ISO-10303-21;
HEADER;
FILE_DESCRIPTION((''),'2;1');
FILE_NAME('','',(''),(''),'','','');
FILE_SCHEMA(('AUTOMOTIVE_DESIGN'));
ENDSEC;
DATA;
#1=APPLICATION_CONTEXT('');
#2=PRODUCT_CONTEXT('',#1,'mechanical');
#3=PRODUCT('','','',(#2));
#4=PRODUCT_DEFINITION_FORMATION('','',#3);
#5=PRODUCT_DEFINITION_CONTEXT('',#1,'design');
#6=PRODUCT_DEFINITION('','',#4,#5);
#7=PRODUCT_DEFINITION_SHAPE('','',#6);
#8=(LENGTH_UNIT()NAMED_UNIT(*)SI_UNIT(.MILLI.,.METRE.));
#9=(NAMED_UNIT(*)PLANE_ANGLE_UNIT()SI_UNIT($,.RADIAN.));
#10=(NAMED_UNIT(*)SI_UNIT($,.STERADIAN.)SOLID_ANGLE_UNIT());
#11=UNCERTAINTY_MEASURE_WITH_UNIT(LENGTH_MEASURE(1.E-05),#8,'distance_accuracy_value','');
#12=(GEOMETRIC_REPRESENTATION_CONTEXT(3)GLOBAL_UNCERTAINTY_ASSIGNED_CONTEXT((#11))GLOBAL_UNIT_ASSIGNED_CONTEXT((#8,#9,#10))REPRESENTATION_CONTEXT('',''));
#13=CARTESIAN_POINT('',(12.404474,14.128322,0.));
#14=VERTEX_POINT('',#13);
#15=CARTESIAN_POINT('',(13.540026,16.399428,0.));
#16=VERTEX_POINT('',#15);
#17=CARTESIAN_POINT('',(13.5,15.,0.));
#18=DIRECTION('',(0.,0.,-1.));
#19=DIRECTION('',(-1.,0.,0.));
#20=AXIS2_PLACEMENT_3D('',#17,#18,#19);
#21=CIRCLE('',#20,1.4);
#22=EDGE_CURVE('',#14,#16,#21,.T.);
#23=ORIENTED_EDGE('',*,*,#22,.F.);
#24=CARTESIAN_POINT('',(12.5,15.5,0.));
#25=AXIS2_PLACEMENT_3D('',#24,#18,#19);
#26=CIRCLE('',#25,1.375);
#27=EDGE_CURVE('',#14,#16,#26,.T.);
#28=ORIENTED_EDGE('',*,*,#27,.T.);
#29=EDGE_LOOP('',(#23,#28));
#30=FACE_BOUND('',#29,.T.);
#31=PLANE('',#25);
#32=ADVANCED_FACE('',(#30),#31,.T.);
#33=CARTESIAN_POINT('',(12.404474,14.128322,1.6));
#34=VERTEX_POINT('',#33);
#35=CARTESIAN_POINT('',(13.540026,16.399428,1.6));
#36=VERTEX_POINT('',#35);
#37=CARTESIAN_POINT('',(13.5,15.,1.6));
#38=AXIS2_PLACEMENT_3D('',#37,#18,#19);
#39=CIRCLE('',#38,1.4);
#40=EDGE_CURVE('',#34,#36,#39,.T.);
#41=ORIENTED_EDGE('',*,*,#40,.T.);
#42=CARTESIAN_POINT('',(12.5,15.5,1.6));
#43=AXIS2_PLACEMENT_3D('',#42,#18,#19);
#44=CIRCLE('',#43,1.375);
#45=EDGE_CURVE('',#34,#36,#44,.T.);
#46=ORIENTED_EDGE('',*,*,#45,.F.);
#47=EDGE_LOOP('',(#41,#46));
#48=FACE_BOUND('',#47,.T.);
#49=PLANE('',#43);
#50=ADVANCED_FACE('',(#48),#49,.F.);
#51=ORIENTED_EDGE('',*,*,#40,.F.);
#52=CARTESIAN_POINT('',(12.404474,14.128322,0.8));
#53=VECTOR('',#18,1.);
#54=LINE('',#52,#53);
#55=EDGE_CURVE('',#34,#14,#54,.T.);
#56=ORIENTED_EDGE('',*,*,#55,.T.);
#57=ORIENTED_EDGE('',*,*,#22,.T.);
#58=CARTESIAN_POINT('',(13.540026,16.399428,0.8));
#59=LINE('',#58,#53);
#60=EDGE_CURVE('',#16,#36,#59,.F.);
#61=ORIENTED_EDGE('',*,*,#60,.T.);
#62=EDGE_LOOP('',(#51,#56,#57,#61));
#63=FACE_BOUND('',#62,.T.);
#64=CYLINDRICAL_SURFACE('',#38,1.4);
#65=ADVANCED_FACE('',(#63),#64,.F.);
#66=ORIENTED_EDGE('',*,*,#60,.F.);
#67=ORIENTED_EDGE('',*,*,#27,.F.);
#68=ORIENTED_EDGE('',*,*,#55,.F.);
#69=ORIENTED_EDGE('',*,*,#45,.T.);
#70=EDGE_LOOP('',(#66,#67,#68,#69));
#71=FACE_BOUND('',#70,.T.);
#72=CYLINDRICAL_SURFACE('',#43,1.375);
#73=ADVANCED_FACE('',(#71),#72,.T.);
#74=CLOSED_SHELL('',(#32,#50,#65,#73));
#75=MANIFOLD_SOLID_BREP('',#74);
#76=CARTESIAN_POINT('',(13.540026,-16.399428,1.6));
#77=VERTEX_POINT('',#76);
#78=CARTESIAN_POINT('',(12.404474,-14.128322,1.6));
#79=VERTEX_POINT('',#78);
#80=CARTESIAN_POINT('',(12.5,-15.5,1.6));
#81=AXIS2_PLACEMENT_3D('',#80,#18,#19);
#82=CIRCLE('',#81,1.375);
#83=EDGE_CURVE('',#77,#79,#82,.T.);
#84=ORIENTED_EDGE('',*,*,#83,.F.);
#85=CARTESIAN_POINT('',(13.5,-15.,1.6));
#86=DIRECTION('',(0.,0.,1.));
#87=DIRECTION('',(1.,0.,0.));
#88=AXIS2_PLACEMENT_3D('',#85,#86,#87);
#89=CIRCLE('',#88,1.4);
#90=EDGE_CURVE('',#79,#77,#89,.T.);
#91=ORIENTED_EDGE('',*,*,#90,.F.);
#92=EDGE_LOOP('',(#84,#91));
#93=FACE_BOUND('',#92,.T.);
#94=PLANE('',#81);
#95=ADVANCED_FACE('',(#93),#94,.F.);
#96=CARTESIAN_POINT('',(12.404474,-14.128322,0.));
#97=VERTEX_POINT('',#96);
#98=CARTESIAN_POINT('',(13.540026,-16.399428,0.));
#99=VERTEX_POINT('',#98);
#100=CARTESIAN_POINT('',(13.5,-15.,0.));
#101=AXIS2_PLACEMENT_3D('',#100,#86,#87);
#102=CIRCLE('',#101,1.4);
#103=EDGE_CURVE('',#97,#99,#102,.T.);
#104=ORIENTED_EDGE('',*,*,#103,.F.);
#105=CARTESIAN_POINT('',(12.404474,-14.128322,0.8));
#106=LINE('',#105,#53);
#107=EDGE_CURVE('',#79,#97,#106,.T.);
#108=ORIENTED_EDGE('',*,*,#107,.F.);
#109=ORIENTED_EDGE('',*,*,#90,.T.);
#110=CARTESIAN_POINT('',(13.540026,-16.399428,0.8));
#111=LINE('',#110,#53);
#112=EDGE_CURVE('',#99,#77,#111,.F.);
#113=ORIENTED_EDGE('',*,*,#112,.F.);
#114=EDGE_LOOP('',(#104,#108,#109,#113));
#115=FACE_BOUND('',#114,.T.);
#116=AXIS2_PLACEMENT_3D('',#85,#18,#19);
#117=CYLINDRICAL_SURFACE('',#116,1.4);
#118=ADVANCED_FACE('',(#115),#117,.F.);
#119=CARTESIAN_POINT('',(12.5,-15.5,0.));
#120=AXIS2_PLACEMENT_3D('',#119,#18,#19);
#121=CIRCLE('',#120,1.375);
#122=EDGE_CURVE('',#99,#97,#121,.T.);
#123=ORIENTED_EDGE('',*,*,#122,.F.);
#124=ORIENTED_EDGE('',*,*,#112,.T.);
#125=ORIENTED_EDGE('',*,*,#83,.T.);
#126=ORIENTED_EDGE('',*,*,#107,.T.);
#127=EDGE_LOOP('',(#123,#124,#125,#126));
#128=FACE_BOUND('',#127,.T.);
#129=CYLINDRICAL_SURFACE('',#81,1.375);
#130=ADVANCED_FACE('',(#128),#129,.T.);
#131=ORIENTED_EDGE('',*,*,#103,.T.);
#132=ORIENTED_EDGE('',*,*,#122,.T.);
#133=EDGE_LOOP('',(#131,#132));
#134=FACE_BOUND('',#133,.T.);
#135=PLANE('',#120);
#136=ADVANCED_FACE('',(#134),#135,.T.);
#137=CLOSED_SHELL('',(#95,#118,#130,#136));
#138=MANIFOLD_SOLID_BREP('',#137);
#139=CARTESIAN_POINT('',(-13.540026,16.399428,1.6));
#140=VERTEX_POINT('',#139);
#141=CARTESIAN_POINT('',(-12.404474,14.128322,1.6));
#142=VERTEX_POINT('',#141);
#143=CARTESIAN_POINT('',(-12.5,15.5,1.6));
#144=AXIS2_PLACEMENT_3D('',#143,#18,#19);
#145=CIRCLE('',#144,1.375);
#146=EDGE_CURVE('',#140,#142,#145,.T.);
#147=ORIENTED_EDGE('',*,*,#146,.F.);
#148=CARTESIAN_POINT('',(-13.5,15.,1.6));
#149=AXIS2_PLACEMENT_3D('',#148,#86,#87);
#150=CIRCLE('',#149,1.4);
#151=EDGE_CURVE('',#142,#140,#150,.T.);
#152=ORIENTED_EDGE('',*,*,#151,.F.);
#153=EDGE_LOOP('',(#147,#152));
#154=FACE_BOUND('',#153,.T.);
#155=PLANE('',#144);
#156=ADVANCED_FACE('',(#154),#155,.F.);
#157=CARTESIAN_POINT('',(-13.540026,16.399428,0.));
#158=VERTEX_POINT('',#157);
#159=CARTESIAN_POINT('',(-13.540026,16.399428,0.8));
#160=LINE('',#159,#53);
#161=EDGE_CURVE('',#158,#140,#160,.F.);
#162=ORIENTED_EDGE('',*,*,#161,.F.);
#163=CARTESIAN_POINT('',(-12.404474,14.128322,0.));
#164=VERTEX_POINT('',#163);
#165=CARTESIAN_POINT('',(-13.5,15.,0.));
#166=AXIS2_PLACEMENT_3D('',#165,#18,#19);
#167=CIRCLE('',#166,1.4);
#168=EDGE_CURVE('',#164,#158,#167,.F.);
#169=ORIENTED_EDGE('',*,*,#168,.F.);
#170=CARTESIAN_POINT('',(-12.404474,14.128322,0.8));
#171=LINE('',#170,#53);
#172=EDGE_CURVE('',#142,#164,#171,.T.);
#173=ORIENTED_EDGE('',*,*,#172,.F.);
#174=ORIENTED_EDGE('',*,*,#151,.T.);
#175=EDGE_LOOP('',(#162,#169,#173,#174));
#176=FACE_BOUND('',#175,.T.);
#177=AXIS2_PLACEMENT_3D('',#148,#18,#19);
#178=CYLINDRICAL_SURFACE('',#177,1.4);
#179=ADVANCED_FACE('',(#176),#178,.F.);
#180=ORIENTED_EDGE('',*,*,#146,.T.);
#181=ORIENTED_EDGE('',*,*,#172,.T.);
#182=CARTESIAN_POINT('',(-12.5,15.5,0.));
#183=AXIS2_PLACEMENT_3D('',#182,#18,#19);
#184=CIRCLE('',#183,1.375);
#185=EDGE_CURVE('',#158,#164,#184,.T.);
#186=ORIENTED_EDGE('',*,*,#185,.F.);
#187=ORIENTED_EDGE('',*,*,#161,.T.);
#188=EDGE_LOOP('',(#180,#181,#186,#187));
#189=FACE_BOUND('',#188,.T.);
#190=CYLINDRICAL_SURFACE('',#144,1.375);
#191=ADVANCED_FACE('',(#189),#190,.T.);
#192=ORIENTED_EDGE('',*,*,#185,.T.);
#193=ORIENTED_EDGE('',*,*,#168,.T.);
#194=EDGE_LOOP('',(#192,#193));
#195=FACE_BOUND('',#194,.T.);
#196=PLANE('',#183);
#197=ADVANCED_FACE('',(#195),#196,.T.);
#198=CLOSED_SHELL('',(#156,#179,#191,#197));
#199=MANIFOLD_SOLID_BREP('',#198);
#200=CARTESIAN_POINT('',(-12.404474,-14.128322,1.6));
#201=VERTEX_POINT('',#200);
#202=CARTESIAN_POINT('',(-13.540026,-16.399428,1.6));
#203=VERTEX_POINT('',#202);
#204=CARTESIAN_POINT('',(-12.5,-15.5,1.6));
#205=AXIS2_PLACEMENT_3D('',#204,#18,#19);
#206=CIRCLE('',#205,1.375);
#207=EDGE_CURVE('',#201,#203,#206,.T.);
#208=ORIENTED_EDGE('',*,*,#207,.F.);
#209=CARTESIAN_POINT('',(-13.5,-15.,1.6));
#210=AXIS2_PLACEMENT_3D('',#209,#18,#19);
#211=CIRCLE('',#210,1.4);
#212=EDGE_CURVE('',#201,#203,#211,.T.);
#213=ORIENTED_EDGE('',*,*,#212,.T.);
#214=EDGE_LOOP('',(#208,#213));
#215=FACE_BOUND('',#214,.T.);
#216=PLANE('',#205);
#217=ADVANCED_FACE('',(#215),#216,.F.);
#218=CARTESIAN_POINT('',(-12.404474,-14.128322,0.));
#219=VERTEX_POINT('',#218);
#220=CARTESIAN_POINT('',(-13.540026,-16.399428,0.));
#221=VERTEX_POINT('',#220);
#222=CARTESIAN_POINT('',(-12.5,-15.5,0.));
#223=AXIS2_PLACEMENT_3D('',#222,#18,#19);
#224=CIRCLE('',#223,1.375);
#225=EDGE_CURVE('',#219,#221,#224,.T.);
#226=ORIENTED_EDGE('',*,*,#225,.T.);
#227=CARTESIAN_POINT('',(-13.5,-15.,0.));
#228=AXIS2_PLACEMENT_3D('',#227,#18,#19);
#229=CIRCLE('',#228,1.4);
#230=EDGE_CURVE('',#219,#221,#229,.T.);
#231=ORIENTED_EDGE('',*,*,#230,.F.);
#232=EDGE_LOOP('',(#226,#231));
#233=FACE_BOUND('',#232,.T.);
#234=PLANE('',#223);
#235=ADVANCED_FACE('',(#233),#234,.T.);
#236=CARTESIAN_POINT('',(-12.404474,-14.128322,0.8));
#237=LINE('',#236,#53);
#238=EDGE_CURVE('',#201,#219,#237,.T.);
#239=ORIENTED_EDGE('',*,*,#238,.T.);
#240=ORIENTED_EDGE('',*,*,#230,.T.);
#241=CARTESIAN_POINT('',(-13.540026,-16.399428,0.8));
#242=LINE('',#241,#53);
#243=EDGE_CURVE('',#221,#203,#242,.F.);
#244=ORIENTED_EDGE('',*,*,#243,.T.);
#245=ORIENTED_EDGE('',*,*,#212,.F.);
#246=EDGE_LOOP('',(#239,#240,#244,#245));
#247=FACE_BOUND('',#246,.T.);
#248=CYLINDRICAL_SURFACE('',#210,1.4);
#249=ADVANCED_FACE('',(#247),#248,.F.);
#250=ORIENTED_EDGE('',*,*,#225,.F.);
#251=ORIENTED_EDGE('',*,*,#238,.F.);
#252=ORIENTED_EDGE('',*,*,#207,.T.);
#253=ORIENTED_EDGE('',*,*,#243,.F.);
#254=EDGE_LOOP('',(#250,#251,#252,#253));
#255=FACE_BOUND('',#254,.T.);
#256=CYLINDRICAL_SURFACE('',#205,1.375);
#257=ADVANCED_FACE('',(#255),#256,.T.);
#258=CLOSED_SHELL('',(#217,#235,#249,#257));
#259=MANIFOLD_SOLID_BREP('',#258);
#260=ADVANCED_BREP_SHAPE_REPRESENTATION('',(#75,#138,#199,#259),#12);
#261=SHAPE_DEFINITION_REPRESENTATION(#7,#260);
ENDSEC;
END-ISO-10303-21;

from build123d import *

# Parameters (mm, degrees)
SKETCH1_R             = 1.375
BOSS_EXTRUDE2_DEPTH   = 1.6
BOSS_EXTRUDE2_2_DEPTH = 1.6
BOSS_EXTRUDE2_3_DEPTH = 1.6
BOSS_EXTRUDE2_4_DEPTH = 1.6
SKETCH2_R             = 1.4
CUT_EXTRUDE1_DEPTH    = 22.905279044


# Read off the part's stored shape, not the designer's step: Surface-Imported1
with BuildPart() as part:
    # Sketch1 → Boss-Extrude2 (new body)
    with BuildSketch(Plane(origin=(0, 0, 0), x_dir=(-1, 0, 0), z_dir=(0, 0, -1))):
        with Locations((-12.5, 15.5)):
            Circle(SKETCH1_R)
    extrude(amount=-BOSS_EXTRUDE2_DEPTH)


with BuildPart() as body_2:
    # Sketch1 → Boss-Extrude2 2 (new body)
    with BuildSketch(Plane(origin=(0, 0, 0), x_dir=(-1, 0, 0), z_dir=(0, 0, -1))):
        with Locations((-12.5, -15.5)):
            Circle(SKETCH1_R)
    extrude(amount=-BOSS_EXTRUDE2_2_DEPTH)


with BuildPart() as body_3:
    # Sketch1 → Boss-Extrude2 3 (new body)
    with BuildSketch(Plane(origin=(0, 0, 0), x_dir=(-1, 0, 0), z_dir=(0, 0, -1))):
        with Locations((12.5, -15.5)):
            Circle(SKETCH1_R)
    extrude(amount=-BOSS_EXTRUDE2_3_DEPTH)


with BuildPart() as body_4:
    # Sketch1 → Boss-Extrude2 4 (new body)
    with BuildSketch(Plane(origin=(0, 0, 0), x_dir=(-1, 0, 0), z_dir=(0, 0, -1))):
        with Locations((12.5, 15.5)):
            Circle(SKETCH1_R)
    extrude(amount=-BOSS_EXTRUDE2_4_DEPTH)


with BuildPart() as cut_extrude1_tool:
    # Sketch2 → Cut-Extrude1 (new, through all)
    with BuildSketch(Plane(origin=(0, 0, 0), x_dir=(-1, 0, 0), z_dir=(0, 0, -1))):
        with Locations((13.5, -15)):
            Circle(SKETCH2_R)
        with Locations((13.5, 15)):
            Circle(SKETCH2_R)
        with Locations((-13.5, -15)):
            Circle(SKETCH2_R)
        with Locations((-13.5, 15)):
            Circle(SKETCH2_R)
    extrude(amount=-CUT_EXTRUDE1_DEPTH)


with BuildPart() as part_1:
    add(part.part)

    # Cut-Extrude1: cut by cut_extrude1_tool
    add(cut_extrude1_tool.part, mode=Mode.SUBTRACT)


with BuildPart() as body_2_1:
    add(body_2.part)

    # Cut-Extrude1: cut by cut_extrude1_tool
    add(cut_extrude1_tool.part, mode=Mode.SUBTRACT)


with BuildPart() as body_3_1:
    add(body_3.part)

    # Cut-Extrude1: cut by cut_extrude1_tool
    add(cut_extrude1_tool.part, mode=Mode.SUBTRACT)


with BuildPart() as body_4_1:
    add(body_4.part)

    # Cut-Extrude1: cut by cut_extrude1_tool
    add(cut_extrude1_tool.part, mode=Mode.SUBTRACT)


solid = Compound([part_1.part, body_2_1.part, body_3_1.part, body_4_1.part])
